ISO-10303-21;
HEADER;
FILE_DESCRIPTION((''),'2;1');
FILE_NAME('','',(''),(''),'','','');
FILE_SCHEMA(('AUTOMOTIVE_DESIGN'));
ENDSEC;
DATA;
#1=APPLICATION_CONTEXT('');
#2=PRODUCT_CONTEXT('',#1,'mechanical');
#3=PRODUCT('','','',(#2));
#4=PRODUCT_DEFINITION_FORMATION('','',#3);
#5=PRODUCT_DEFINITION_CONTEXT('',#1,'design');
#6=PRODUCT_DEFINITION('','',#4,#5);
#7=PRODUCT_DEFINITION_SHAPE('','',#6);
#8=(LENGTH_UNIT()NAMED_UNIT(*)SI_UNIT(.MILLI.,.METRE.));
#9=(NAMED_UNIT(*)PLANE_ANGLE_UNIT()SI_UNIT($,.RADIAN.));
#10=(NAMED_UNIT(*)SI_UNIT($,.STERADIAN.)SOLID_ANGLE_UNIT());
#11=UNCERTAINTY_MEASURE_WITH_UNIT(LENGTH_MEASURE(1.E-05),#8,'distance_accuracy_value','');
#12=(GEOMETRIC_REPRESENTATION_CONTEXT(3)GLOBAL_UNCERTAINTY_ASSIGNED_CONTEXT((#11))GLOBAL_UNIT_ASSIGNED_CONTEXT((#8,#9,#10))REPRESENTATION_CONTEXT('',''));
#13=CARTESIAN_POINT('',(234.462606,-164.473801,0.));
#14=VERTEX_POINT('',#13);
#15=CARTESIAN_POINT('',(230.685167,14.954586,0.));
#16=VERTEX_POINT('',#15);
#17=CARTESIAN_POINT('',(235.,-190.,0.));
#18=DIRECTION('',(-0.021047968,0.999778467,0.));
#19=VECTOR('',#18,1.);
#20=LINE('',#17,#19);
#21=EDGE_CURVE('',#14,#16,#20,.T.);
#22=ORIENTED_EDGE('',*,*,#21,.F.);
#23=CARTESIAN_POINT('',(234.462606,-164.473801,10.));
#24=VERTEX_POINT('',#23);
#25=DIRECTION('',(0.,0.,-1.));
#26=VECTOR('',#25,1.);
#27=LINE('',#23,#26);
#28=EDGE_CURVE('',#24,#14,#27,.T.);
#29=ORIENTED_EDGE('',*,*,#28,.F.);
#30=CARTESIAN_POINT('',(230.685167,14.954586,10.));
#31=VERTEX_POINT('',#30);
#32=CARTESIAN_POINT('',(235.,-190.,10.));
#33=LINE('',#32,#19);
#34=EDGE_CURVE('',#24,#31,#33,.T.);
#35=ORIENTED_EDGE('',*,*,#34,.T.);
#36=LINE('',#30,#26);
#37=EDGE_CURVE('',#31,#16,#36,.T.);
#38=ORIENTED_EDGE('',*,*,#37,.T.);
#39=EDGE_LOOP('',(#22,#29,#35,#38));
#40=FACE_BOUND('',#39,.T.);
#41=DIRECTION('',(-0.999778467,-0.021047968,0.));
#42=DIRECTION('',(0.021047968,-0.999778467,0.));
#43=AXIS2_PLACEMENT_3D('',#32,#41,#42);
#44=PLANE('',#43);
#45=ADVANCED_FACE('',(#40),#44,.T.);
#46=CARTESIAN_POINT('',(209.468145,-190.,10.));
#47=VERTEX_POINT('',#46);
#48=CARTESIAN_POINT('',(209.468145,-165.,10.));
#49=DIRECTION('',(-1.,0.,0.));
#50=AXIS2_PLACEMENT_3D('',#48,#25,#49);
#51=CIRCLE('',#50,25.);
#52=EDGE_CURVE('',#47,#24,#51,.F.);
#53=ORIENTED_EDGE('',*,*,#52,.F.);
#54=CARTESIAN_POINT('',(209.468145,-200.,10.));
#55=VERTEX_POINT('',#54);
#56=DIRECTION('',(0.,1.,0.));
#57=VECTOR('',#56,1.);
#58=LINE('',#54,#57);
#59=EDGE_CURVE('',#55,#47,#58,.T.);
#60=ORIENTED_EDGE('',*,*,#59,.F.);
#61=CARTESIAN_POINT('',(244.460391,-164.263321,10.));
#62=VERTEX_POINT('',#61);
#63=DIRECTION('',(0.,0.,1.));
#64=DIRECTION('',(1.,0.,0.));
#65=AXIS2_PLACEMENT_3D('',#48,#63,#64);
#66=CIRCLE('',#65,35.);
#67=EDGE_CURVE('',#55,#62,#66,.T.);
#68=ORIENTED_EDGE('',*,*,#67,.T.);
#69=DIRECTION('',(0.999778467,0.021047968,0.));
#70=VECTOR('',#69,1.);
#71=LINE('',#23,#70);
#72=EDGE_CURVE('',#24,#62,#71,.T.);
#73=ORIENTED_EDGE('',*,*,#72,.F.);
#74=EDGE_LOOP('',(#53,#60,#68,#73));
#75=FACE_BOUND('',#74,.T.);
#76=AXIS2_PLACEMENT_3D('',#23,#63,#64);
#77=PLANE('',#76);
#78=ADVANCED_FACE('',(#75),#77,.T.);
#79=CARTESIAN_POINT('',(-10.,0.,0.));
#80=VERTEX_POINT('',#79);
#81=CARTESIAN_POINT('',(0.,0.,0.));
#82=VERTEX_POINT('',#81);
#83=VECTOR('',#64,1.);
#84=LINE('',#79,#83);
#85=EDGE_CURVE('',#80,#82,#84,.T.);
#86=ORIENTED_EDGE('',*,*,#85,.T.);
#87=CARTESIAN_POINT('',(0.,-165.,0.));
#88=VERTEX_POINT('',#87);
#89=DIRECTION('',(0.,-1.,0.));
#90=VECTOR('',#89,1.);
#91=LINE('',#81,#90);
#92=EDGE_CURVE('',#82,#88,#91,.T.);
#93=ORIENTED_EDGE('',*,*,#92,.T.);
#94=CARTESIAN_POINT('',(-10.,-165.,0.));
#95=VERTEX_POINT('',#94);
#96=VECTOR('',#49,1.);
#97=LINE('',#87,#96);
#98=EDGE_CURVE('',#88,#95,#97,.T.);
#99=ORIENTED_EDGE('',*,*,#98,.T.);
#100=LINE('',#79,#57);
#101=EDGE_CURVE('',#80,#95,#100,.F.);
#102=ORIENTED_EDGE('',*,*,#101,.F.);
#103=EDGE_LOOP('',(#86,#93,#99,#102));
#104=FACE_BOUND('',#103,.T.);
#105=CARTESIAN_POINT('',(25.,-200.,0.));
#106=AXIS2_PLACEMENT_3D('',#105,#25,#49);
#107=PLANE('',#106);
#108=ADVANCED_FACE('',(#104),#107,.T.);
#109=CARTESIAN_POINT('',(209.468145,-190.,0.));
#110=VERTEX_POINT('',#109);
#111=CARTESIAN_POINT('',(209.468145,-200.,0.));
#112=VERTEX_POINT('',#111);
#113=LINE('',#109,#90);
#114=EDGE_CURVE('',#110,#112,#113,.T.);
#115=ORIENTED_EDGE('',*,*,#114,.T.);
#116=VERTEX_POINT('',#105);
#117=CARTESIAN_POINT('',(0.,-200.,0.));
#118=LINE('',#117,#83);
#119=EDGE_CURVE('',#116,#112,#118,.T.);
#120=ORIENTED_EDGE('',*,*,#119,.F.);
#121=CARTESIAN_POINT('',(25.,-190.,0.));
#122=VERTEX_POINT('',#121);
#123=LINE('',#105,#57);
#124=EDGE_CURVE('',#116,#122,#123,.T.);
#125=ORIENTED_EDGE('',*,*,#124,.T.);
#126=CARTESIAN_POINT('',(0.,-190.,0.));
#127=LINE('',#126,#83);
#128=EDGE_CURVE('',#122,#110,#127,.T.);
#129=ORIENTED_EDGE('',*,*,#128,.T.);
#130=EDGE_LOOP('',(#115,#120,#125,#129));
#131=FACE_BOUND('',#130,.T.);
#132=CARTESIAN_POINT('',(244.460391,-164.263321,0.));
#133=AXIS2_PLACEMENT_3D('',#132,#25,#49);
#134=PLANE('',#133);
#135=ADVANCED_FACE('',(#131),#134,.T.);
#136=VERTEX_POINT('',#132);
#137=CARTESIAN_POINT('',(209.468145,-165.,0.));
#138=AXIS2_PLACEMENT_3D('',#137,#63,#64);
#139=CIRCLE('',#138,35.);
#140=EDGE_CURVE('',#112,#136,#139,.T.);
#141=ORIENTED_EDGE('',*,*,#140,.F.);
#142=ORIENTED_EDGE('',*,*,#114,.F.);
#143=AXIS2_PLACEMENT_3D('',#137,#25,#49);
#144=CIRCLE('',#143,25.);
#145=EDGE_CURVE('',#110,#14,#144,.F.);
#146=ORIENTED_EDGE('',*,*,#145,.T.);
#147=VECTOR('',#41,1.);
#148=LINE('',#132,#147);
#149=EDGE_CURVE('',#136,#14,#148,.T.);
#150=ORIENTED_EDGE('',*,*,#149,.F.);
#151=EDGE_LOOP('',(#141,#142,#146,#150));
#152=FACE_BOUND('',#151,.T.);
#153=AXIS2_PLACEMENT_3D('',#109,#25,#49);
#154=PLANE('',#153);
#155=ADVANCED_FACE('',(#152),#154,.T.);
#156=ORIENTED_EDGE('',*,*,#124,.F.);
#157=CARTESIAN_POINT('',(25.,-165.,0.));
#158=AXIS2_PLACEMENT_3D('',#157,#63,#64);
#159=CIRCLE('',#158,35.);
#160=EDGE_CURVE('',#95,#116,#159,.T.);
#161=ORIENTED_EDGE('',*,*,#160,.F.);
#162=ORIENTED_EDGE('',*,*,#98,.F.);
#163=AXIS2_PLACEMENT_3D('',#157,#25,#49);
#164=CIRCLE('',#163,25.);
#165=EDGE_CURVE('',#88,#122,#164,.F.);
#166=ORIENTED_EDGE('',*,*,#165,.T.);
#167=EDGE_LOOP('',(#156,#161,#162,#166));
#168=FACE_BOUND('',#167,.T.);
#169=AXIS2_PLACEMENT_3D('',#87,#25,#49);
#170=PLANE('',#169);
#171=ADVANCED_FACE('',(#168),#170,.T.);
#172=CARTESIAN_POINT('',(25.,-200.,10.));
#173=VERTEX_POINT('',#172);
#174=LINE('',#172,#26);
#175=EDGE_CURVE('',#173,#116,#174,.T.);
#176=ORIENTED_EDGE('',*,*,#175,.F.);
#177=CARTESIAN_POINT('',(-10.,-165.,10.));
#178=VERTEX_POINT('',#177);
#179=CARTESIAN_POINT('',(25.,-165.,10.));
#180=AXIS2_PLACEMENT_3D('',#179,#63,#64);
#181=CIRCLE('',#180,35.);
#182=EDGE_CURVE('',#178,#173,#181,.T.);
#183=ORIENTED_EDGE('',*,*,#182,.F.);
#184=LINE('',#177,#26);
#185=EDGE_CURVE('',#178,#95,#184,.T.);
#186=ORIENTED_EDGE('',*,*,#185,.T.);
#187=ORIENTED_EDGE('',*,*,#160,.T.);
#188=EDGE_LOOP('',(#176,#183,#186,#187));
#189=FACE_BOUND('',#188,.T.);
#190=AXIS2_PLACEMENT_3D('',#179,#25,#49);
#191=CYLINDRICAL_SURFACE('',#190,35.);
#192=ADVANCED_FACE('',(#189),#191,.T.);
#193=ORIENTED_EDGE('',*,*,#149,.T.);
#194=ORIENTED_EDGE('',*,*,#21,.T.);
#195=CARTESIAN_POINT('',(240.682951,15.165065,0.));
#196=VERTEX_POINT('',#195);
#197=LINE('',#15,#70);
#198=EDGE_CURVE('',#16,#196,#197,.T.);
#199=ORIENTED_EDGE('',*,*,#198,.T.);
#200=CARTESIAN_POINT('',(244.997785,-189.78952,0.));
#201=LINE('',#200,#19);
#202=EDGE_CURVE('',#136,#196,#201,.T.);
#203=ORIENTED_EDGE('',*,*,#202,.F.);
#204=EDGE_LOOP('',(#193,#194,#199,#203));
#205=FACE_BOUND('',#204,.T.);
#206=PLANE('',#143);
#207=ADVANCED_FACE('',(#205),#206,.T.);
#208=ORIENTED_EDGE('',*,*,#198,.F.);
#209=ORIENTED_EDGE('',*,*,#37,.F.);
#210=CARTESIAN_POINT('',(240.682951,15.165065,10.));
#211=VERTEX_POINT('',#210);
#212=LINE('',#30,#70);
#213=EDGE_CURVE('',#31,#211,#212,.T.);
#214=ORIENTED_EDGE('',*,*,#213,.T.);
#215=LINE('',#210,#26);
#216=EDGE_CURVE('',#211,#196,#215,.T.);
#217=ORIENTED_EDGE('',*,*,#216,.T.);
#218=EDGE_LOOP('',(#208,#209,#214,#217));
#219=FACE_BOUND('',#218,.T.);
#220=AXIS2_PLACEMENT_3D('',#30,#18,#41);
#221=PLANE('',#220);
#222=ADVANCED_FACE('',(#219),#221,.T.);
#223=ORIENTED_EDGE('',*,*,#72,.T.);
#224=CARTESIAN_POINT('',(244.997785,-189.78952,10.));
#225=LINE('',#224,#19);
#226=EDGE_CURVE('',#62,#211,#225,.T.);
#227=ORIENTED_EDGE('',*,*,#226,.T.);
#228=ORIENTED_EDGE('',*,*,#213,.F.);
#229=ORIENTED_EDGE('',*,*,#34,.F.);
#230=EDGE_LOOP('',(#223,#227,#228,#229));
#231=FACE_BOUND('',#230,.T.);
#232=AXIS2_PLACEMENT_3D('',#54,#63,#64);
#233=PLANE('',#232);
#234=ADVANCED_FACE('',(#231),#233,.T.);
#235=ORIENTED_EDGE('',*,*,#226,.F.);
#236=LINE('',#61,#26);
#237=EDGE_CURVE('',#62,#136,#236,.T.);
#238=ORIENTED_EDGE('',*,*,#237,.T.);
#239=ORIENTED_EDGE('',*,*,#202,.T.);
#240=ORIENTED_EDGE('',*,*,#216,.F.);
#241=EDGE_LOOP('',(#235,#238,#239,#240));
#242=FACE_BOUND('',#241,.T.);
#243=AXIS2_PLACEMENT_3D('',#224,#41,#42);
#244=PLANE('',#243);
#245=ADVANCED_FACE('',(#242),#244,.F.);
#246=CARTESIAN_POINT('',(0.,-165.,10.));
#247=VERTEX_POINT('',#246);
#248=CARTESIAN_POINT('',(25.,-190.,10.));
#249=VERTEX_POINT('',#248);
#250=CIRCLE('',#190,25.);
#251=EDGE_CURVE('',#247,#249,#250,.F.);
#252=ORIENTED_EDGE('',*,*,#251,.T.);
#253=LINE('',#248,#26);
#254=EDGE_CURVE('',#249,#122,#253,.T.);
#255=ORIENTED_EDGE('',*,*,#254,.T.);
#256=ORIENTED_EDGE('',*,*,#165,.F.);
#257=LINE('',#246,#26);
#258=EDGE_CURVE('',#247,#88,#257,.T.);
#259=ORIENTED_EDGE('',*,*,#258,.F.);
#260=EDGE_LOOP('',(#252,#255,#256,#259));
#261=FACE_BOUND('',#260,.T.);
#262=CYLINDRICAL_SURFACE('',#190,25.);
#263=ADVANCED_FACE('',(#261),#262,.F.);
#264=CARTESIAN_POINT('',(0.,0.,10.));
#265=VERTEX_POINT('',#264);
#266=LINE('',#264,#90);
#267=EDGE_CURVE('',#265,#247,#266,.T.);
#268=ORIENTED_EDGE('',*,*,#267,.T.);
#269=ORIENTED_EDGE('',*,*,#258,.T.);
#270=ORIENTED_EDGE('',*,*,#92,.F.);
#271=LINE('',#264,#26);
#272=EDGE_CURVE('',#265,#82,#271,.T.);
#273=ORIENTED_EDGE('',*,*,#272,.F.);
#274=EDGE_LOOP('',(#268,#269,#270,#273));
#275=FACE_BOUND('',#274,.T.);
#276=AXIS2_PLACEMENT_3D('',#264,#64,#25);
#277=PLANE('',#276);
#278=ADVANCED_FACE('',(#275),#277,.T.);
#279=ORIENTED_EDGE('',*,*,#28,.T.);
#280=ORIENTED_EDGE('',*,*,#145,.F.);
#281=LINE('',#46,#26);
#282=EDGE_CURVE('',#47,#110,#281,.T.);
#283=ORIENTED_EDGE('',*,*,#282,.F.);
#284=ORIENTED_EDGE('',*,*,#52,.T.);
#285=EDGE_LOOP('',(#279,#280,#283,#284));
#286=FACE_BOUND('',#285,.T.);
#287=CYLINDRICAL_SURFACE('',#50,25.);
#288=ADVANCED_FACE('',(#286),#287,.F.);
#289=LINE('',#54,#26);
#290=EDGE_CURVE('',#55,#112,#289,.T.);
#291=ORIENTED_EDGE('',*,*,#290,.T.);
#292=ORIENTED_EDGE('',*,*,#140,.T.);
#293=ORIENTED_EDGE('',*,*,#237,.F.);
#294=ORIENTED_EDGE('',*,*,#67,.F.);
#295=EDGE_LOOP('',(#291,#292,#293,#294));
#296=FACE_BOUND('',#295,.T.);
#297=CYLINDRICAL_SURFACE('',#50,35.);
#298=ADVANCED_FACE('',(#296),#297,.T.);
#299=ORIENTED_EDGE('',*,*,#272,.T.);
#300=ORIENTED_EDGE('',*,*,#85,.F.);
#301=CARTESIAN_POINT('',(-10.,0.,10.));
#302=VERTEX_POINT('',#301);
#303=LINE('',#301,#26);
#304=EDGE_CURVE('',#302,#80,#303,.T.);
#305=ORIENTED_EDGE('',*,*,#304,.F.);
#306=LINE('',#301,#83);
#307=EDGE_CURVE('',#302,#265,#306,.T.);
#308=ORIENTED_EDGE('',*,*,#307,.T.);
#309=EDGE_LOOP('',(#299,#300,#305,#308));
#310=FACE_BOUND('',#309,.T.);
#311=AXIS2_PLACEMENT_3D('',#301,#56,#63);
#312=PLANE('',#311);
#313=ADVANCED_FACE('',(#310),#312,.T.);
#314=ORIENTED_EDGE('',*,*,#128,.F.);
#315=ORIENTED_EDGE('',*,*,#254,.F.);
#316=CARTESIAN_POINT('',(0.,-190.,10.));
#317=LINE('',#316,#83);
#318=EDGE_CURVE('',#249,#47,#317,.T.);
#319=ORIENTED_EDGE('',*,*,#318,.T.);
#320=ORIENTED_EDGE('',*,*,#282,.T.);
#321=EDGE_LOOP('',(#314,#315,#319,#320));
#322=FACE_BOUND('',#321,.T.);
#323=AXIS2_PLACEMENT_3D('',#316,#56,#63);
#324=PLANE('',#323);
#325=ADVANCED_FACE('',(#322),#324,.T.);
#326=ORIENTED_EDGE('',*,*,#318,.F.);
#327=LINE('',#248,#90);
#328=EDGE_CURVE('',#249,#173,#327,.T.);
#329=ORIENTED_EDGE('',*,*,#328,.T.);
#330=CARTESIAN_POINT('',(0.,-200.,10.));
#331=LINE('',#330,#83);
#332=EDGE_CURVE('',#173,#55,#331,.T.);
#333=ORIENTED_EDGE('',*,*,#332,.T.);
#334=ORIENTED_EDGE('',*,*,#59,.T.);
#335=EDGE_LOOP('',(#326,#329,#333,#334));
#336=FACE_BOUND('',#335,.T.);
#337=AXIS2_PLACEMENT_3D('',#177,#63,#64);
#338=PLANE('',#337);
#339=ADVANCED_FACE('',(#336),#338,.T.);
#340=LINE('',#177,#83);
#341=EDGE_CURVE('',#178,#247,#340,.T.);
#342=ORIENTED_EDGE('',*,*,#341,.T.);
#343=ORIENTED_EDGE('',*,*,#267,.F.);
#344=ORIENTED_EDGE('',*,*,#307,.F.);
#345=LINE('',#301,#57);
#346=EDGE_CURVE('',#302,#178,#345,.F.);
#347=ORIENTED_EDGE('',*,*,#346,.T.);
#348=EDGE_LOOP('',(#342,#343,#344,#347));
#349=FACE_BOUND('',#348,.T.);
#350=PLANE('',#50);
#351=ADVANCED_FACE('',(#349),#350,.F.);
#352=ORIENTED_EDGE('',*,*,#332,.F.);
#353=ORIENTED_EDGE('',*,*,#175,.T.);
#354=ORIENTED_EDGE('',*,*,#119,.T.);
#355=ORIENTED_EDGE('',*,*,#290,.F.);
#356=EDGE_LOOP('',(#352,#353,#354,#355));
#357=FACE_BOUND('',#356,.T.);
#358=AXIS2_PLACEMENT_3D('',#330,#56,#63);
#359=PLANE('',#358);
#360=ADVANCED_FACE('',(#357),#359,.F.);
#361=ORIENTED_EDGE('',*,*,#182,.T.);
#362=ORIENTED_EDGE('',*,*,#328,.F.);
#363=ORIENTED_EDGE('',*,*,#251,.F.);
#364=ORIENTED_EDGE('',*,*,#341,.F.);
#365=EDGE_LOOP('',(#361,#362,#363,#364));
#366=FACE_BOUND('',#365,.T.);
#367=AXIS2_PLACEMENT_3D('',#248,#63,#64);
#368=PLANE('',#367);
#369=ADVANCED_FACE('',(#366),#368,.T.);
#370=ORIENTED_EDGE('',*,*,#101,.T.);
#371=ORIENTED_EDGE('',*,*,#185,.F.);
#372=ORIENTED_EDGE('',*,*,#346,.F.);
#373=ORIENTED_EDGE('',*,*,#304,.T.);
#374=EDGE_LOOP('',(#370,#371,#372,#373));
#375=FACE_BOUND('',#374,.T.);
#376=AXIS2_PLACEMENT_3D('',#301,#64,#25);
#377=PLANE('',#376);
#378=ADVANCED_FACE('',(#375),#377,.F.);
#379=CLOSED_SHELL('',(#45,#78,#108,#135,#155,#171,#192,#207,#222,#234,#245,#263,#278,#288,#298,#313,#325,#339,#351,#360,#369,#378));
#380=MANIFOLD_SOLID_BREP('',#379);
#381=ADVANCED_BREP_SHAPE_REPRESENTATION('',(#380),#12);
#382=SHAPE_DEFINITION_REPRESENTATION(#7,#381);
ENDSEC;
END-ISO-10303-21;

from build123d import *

# Parameters (mm, degrees)
TABAN_FLAN_1_DEPTH = 10


# Sheet-metal steps are written as plain solids
with BuildPart() as part:
    # Çizim1 → Taban-Flanş1 (new body)
    with BuildSketch(Plane.XY):
        with BuildLine():
            Line((0, 0), (0, -165))
            ThreePointArc((0, -165), (7.32233047, -182.67766953), (25, -190))
            Line((25, -190), (209.468144658, -190))
            ThreePointArc((209.468144658, -190), (227.330884927, -182.490640643), (234.462606333, -164.473800807))
            Line((234.462606333, -164.473800807), (230.685166616, 14.954585733))
            Line((230.685166616, 14.954585733), (240.682951286, 15.16506541))
            Line((240.682951286, 15.16506541), (244.460391003, -164.26332113))
            ThreePointArc((244.460391003, -164.26332113), (234.475981035, -189.4868969), (209.468144658, -200))
            Line((209.468144658, -200), (25, -200))
            ThreePointArc((25, -200), (0.251262658, -189.748737342), (-10, -165))
            Line((-10, -165), (-10, 0))
            Line((-10, 0), (0, 0))
        make_face()
    extrude(amount=TABAN_FLAN_1_DEPTH)


solid = part.part
